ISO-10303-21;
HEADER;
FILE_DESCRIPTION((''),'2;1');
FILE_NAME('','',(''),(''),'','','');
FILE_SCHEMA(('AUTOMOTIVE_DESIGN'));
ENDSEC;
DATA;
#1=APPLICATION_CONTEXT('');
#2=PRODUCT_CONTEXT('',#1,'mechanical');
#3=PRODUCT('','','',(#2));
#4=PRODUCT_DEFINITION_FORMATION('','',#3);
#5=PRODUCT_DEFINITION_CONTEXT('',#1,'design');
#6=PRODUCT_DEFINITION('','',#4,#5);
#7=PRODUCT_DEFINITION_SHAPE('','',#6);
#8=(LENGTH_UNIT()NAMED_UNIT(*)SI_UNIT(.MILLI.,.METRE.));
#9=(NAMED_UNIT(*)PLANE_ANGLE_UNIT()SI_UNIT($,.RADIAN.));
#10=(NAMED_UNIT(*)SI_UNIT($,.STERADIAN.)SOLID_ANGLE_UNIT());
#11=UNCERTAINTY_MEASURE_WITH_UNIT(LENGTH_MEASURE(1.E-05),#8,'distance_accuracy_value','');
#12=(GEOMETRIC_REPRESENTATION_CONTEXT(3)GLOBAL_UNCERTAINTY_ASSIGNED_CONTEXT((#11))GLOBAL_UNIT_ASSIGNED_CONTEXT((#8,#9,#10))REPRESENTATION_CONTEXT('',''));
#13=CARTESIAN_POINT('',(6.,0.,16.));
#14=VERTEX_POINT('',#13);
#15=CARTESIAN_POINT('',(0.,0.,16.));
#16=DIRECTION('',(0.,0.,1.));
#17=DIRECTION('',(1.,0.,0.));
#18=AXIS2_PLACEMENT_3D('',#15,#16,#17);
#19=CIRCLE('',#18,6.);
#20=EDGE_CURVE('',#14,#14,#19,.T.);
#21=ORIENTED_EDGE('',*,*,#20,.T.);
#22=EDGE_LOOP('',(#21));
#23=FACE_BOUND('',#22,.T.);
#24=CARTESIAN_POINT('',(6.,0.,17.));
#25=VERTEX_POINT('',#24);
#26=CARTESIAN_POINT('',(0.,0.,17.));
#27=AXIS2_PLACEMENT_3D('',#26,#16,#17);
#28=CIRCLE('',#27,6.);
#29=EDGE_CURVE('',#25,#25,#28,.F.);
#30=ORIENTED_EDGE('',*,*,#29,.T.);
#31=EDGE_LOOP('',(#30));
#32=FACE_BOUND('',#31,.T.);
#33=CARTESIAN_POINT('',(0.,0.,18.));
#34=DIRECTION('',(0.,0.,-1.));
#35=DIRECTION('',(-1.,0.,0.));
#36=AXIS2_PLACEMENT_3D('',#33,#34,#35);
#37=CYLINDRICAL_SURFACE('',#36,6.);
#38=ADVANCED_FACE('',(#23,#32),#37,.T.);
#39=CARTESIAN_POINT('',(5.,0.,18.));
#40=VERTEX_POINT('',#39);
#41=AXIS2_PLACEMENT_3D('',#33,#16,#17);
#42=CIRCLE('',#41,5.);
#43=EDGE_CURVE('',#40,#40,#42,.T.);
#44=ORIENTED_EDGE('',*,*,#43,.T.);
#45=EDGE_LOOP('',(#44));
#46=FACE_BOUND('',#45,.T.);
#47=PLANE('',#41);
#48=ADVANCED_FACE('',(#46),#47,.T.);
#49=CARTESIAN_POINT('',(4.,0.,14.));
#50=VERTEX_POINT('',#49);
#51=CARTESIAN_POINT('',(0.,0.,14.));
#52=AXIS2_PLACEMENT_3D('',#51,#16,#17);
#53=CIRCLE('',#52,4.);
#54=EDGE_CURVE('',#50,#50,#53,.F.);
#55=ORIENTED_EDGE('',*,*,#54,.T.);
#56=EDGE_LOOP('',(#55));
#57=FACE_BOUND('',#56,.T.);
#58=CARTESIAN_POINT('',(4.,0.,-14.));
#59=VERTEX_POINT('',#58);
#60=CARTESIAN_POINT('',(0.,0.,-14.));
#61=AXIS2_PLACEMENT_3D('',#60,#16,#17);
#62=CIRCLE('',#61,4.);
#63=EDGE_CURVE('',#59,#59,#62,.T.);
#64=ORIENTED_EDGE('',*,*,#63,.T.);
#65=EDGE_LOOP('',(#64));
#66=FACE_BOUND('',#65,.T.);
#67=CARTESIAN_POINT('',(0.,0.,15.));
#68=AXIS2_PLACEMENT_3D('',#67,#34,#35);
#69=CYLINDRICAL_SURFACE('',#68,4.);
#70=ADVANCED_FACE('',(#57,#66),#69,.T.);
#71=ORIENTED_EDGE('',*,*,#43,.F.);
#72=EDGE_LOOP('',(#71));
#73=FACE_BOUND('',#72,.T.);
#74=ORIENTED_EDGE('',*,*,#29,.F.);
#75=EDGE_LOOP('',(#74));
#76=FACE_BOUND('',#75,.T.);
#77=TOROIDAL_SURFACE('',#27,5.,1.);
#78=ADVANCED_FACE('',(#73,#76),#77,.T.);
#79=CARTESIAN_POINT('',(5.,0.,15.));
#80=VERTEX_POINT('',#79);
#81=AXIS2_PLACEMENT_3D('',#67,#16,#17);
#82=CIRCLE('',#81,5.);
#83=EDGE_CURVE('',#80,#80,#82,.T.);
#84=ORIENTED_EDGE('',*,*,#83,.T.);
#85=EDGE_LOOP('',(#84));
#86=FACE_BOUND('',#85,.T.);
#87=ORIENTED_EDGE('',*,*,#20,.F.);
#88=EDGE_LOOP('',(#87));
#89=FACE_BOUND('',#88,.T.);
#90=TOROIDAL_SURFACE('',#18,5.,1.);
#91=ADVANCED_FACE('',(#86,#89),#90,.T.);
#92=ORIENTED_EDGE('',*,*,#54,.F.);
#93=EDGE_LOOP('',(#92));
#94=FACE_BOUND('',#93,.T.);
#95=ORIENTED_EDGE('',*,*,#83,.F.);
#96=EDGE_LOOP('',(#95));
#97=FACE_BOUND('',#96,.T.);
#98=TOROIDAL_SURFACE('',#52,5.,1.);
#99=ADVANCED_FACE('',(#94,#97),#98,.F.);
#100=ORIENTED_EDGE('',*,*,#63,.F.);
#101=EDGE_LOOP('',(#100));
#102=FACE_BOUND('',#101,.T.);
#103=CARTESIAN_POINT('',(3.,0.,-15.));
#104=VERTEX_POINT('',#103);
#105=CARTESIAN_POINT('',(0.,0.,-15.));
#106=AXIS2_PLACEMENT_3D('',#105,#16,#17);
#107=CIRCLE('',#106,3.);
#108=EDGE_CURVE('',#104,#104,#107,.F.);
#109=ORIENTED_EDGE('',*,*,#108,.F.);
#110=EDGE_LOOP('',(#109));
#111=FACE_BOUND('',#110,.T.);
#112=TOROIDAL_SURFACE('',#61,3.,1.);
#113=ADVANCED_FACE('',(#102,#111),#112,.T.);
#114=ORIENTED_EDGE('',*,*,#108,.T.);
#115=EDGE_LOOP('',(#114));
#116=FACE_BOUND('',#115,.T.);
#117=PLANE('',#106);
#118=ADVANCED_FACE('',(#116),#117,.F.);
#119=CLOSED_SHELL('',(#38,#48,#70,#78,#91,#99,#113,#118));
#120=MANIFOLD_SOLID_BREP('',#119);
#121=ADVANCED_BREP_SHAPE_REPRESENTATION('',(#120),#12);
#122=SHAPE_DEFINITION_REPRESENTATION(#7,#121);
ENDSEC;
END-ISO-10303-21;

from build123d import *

# Parameters (mm, degrees)
SKETCH1_R           = 4
BOSS_EXTRUDE1_DEPTH = 15
SKETCH2_R           = 6
BOSS_EXTRUDE2_DEPTH = 3
FILLET1_R           = 1


with BuildPart() as part:
    # Sketch1 → Boss-Extrude1 (new, symmetric)
    with BuildSketch(Plane.XY):
        Circle(SKETCH1_R)
    extrude(amount=BOSS_EXTRUDE1_DEPTH, both=True)

    # Sketch2 → Boss-Extrude2 (add)
    with BuildSketch(Plane.XY.offset(15)):
        Circle(SKETCH2_R)
    extrude(amount=BOSS_EXTRUDE2_DEPTH)

    # Fillet1
    fillet1_edges = [part.edges().sort_by_distance(p)[0] for p in [
        (-4, 0, -15),
        (-4, 0, 15),
        (-6, 0, 15),
        (-6, 0, 18),
    ]]
    fillet(fillet1_edges, radius=FILLET1_R - 0.0001)  # a hair under: the kernel refuses the full size


solid = part.part
